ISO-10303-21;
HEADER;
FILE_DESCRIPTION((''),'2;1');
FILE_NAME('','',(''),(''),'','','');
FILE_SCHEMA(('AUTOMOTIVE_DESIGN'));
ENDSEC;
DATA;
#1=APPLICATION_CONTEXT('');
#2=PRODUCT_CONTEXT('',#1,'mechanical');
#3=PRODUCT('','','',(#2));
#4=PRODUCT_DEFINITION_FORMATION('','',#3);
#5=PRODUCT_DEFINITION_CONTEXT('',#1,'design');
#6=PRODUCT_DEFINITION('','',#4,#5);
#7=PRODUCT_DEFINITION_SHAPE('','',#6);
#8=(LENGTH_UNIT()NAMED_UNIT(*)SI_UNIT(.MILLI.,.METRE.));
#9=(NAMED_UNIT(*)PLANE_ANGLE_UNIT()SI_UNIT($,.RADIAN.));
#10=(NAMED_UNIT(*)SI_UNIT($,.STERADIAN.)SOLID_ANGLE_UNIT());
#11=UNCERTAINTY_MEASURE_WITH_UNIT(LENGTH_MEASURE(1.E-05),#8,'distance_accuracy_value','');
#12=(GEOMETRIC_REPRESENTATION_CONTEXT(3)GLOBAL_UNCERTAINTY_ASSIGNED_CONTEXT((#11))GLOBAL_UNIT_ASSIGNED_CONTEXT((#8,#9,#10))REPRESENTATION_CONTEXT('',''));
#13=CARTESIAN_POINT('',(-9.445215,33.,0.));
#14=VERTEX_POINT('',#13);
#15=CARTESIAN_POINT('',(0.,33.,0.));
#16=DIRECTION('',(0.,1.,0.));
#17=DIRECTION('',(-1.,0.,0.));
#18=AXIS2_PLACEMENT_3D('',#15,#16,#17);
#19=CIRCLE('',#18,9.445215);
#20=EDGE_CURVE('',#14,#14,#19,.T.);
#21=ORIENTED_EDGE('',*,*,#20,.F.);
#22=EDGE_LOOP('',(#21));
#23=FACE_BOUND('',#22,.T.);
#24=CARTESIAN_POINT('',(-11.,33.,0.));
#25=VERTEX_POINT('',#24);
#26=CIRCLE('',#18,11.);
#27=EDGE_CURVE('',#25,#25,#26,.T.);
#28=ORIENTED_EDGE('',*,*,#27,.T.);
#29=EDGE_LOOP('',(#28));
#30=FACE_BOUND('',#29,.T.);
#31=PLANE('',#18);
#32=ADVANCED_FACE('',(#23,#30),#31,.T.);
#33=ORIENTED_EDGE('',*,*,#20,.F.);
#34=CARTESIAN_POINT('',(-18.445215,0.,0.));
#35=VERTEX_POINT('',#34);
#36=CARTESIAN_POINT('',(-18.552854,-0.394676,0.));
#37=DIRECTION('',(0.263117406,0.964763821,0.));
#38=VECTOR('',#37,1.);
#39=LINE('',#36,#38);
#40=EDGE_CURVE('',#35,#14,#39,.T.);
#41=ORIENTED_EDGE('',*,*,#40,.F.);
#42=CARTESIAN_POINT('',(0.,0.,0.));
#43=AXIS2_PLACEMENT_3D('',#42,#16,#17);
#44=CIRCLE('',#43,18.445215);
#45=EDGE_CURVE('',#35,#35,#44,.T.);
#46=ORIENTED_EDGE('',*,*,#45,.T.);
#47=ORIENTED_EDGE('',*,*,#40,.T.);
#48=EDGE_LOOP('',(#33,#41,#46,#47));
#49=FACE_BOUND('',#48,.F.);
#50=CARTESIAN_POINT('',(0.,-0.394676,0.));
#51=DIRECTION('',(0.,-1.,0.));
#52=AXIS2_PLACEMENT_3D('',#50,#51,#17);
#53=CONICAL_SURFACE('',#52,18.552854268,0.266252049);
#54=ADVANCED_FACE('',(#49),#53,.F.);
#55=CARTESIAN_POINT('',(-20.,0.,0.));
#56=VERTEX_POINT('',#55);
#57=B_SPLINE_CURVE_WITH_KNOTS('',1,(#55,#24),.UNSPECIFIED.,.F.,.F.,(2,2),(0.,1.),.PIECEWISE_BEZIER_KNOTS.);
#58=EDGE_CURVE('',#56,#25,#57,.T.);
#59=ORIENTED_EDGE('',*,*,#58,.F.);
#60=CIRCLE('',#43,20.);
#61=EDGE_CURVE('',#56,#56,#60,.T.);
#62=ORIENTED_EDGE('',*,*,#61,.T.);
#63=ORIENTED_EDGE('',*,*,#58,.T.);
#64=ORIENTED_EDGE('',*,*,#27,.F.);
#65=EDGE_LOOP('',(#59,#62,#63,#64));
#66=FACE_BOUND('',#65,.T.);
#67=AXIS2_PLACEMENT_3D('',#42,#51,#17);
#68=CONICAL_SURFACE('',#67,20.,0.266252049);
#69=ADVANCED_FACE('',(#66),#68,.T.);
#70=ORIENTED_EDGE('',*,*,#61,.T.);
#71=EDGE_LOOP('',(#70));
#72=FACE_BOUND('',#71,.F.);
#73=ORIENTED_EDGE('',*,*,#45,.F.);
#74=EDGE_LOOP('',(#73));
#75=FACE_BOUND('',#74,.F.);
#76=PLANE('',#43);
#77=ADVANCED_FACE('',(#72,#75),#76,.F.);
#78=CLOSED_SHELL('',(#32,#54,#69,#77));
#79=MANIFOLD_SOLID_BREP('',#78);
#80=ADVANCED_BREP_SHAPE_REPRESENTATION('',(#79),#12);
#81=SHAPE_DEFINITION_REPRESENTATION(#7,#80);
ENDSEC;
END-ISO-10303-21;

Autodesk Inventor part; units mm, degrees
ref_plane "YZ Plane" through (0, 0, 0) normal (1, 0, 0) x (0, 1, 0)
ref_plane "XY Plane" through (0, 0, 0) normal (0, 0, 1) x (1, 0, 0)
sketch "Szkic6" plane through (0, 0, 0) normal (0, 1, 0) x (-1, 0, 0)
  circle A0 centre (0, 0) radius 20
  dimension "d33" = 40
ref_plane "Płaszczyzna konstrukcyjna1" through (0, 33, 0) normal (0, 1, 0) x (-1, 0, 0)
sketch "Szkic7" plane through (0, 33, 0) normal (0, 1, 0) x (-1, 0, 0)
  circle A0 centre (0, 0) radius 11
  dimension "d35" = 22
loft "Wyciągnięcie złożone1" add profiles "Szkic6", "Szkic7"
shell "Skorupa1" thickness 1.5 removed faces 2 at (3.2467, 33, -1.704) at (2.364, 0, 6.2334)
equation "\"d33\" = OD1"
equation "\"d35\" = OD2"
equation "\"d52\" = THK"
equation "\"SzerokośćGięciaPodcięcia\" = Grubość"
equation "\"RozmiarPodcięciaNarożnika\" = 4 * Grubość"
equation "\"PromieńPrzejścia\" = PromieńGięcia"
equation "\"Rozmiar_promienia_Jacobiego\" = PromieńGięcia"
equation "\"Wielk_odstępu\" = Grubość"
equation "\"d2\" = PromieńGięcia"
equation "\"d23\" = PromieńGięcia"
equation "\"OD1\" = 40"
equation "\"OD2\" = 22"
equation "\"L\" = 33"
equation "\"THK\" = 1.5"
equation "\"d34\" = L"
equation "\"Grubość\" = 1.5"
equation "\"PromieńGięcia\" = 3"
properties part number "Redukcja symetryczna Ø40x22x1,5 L=33" material "304"
